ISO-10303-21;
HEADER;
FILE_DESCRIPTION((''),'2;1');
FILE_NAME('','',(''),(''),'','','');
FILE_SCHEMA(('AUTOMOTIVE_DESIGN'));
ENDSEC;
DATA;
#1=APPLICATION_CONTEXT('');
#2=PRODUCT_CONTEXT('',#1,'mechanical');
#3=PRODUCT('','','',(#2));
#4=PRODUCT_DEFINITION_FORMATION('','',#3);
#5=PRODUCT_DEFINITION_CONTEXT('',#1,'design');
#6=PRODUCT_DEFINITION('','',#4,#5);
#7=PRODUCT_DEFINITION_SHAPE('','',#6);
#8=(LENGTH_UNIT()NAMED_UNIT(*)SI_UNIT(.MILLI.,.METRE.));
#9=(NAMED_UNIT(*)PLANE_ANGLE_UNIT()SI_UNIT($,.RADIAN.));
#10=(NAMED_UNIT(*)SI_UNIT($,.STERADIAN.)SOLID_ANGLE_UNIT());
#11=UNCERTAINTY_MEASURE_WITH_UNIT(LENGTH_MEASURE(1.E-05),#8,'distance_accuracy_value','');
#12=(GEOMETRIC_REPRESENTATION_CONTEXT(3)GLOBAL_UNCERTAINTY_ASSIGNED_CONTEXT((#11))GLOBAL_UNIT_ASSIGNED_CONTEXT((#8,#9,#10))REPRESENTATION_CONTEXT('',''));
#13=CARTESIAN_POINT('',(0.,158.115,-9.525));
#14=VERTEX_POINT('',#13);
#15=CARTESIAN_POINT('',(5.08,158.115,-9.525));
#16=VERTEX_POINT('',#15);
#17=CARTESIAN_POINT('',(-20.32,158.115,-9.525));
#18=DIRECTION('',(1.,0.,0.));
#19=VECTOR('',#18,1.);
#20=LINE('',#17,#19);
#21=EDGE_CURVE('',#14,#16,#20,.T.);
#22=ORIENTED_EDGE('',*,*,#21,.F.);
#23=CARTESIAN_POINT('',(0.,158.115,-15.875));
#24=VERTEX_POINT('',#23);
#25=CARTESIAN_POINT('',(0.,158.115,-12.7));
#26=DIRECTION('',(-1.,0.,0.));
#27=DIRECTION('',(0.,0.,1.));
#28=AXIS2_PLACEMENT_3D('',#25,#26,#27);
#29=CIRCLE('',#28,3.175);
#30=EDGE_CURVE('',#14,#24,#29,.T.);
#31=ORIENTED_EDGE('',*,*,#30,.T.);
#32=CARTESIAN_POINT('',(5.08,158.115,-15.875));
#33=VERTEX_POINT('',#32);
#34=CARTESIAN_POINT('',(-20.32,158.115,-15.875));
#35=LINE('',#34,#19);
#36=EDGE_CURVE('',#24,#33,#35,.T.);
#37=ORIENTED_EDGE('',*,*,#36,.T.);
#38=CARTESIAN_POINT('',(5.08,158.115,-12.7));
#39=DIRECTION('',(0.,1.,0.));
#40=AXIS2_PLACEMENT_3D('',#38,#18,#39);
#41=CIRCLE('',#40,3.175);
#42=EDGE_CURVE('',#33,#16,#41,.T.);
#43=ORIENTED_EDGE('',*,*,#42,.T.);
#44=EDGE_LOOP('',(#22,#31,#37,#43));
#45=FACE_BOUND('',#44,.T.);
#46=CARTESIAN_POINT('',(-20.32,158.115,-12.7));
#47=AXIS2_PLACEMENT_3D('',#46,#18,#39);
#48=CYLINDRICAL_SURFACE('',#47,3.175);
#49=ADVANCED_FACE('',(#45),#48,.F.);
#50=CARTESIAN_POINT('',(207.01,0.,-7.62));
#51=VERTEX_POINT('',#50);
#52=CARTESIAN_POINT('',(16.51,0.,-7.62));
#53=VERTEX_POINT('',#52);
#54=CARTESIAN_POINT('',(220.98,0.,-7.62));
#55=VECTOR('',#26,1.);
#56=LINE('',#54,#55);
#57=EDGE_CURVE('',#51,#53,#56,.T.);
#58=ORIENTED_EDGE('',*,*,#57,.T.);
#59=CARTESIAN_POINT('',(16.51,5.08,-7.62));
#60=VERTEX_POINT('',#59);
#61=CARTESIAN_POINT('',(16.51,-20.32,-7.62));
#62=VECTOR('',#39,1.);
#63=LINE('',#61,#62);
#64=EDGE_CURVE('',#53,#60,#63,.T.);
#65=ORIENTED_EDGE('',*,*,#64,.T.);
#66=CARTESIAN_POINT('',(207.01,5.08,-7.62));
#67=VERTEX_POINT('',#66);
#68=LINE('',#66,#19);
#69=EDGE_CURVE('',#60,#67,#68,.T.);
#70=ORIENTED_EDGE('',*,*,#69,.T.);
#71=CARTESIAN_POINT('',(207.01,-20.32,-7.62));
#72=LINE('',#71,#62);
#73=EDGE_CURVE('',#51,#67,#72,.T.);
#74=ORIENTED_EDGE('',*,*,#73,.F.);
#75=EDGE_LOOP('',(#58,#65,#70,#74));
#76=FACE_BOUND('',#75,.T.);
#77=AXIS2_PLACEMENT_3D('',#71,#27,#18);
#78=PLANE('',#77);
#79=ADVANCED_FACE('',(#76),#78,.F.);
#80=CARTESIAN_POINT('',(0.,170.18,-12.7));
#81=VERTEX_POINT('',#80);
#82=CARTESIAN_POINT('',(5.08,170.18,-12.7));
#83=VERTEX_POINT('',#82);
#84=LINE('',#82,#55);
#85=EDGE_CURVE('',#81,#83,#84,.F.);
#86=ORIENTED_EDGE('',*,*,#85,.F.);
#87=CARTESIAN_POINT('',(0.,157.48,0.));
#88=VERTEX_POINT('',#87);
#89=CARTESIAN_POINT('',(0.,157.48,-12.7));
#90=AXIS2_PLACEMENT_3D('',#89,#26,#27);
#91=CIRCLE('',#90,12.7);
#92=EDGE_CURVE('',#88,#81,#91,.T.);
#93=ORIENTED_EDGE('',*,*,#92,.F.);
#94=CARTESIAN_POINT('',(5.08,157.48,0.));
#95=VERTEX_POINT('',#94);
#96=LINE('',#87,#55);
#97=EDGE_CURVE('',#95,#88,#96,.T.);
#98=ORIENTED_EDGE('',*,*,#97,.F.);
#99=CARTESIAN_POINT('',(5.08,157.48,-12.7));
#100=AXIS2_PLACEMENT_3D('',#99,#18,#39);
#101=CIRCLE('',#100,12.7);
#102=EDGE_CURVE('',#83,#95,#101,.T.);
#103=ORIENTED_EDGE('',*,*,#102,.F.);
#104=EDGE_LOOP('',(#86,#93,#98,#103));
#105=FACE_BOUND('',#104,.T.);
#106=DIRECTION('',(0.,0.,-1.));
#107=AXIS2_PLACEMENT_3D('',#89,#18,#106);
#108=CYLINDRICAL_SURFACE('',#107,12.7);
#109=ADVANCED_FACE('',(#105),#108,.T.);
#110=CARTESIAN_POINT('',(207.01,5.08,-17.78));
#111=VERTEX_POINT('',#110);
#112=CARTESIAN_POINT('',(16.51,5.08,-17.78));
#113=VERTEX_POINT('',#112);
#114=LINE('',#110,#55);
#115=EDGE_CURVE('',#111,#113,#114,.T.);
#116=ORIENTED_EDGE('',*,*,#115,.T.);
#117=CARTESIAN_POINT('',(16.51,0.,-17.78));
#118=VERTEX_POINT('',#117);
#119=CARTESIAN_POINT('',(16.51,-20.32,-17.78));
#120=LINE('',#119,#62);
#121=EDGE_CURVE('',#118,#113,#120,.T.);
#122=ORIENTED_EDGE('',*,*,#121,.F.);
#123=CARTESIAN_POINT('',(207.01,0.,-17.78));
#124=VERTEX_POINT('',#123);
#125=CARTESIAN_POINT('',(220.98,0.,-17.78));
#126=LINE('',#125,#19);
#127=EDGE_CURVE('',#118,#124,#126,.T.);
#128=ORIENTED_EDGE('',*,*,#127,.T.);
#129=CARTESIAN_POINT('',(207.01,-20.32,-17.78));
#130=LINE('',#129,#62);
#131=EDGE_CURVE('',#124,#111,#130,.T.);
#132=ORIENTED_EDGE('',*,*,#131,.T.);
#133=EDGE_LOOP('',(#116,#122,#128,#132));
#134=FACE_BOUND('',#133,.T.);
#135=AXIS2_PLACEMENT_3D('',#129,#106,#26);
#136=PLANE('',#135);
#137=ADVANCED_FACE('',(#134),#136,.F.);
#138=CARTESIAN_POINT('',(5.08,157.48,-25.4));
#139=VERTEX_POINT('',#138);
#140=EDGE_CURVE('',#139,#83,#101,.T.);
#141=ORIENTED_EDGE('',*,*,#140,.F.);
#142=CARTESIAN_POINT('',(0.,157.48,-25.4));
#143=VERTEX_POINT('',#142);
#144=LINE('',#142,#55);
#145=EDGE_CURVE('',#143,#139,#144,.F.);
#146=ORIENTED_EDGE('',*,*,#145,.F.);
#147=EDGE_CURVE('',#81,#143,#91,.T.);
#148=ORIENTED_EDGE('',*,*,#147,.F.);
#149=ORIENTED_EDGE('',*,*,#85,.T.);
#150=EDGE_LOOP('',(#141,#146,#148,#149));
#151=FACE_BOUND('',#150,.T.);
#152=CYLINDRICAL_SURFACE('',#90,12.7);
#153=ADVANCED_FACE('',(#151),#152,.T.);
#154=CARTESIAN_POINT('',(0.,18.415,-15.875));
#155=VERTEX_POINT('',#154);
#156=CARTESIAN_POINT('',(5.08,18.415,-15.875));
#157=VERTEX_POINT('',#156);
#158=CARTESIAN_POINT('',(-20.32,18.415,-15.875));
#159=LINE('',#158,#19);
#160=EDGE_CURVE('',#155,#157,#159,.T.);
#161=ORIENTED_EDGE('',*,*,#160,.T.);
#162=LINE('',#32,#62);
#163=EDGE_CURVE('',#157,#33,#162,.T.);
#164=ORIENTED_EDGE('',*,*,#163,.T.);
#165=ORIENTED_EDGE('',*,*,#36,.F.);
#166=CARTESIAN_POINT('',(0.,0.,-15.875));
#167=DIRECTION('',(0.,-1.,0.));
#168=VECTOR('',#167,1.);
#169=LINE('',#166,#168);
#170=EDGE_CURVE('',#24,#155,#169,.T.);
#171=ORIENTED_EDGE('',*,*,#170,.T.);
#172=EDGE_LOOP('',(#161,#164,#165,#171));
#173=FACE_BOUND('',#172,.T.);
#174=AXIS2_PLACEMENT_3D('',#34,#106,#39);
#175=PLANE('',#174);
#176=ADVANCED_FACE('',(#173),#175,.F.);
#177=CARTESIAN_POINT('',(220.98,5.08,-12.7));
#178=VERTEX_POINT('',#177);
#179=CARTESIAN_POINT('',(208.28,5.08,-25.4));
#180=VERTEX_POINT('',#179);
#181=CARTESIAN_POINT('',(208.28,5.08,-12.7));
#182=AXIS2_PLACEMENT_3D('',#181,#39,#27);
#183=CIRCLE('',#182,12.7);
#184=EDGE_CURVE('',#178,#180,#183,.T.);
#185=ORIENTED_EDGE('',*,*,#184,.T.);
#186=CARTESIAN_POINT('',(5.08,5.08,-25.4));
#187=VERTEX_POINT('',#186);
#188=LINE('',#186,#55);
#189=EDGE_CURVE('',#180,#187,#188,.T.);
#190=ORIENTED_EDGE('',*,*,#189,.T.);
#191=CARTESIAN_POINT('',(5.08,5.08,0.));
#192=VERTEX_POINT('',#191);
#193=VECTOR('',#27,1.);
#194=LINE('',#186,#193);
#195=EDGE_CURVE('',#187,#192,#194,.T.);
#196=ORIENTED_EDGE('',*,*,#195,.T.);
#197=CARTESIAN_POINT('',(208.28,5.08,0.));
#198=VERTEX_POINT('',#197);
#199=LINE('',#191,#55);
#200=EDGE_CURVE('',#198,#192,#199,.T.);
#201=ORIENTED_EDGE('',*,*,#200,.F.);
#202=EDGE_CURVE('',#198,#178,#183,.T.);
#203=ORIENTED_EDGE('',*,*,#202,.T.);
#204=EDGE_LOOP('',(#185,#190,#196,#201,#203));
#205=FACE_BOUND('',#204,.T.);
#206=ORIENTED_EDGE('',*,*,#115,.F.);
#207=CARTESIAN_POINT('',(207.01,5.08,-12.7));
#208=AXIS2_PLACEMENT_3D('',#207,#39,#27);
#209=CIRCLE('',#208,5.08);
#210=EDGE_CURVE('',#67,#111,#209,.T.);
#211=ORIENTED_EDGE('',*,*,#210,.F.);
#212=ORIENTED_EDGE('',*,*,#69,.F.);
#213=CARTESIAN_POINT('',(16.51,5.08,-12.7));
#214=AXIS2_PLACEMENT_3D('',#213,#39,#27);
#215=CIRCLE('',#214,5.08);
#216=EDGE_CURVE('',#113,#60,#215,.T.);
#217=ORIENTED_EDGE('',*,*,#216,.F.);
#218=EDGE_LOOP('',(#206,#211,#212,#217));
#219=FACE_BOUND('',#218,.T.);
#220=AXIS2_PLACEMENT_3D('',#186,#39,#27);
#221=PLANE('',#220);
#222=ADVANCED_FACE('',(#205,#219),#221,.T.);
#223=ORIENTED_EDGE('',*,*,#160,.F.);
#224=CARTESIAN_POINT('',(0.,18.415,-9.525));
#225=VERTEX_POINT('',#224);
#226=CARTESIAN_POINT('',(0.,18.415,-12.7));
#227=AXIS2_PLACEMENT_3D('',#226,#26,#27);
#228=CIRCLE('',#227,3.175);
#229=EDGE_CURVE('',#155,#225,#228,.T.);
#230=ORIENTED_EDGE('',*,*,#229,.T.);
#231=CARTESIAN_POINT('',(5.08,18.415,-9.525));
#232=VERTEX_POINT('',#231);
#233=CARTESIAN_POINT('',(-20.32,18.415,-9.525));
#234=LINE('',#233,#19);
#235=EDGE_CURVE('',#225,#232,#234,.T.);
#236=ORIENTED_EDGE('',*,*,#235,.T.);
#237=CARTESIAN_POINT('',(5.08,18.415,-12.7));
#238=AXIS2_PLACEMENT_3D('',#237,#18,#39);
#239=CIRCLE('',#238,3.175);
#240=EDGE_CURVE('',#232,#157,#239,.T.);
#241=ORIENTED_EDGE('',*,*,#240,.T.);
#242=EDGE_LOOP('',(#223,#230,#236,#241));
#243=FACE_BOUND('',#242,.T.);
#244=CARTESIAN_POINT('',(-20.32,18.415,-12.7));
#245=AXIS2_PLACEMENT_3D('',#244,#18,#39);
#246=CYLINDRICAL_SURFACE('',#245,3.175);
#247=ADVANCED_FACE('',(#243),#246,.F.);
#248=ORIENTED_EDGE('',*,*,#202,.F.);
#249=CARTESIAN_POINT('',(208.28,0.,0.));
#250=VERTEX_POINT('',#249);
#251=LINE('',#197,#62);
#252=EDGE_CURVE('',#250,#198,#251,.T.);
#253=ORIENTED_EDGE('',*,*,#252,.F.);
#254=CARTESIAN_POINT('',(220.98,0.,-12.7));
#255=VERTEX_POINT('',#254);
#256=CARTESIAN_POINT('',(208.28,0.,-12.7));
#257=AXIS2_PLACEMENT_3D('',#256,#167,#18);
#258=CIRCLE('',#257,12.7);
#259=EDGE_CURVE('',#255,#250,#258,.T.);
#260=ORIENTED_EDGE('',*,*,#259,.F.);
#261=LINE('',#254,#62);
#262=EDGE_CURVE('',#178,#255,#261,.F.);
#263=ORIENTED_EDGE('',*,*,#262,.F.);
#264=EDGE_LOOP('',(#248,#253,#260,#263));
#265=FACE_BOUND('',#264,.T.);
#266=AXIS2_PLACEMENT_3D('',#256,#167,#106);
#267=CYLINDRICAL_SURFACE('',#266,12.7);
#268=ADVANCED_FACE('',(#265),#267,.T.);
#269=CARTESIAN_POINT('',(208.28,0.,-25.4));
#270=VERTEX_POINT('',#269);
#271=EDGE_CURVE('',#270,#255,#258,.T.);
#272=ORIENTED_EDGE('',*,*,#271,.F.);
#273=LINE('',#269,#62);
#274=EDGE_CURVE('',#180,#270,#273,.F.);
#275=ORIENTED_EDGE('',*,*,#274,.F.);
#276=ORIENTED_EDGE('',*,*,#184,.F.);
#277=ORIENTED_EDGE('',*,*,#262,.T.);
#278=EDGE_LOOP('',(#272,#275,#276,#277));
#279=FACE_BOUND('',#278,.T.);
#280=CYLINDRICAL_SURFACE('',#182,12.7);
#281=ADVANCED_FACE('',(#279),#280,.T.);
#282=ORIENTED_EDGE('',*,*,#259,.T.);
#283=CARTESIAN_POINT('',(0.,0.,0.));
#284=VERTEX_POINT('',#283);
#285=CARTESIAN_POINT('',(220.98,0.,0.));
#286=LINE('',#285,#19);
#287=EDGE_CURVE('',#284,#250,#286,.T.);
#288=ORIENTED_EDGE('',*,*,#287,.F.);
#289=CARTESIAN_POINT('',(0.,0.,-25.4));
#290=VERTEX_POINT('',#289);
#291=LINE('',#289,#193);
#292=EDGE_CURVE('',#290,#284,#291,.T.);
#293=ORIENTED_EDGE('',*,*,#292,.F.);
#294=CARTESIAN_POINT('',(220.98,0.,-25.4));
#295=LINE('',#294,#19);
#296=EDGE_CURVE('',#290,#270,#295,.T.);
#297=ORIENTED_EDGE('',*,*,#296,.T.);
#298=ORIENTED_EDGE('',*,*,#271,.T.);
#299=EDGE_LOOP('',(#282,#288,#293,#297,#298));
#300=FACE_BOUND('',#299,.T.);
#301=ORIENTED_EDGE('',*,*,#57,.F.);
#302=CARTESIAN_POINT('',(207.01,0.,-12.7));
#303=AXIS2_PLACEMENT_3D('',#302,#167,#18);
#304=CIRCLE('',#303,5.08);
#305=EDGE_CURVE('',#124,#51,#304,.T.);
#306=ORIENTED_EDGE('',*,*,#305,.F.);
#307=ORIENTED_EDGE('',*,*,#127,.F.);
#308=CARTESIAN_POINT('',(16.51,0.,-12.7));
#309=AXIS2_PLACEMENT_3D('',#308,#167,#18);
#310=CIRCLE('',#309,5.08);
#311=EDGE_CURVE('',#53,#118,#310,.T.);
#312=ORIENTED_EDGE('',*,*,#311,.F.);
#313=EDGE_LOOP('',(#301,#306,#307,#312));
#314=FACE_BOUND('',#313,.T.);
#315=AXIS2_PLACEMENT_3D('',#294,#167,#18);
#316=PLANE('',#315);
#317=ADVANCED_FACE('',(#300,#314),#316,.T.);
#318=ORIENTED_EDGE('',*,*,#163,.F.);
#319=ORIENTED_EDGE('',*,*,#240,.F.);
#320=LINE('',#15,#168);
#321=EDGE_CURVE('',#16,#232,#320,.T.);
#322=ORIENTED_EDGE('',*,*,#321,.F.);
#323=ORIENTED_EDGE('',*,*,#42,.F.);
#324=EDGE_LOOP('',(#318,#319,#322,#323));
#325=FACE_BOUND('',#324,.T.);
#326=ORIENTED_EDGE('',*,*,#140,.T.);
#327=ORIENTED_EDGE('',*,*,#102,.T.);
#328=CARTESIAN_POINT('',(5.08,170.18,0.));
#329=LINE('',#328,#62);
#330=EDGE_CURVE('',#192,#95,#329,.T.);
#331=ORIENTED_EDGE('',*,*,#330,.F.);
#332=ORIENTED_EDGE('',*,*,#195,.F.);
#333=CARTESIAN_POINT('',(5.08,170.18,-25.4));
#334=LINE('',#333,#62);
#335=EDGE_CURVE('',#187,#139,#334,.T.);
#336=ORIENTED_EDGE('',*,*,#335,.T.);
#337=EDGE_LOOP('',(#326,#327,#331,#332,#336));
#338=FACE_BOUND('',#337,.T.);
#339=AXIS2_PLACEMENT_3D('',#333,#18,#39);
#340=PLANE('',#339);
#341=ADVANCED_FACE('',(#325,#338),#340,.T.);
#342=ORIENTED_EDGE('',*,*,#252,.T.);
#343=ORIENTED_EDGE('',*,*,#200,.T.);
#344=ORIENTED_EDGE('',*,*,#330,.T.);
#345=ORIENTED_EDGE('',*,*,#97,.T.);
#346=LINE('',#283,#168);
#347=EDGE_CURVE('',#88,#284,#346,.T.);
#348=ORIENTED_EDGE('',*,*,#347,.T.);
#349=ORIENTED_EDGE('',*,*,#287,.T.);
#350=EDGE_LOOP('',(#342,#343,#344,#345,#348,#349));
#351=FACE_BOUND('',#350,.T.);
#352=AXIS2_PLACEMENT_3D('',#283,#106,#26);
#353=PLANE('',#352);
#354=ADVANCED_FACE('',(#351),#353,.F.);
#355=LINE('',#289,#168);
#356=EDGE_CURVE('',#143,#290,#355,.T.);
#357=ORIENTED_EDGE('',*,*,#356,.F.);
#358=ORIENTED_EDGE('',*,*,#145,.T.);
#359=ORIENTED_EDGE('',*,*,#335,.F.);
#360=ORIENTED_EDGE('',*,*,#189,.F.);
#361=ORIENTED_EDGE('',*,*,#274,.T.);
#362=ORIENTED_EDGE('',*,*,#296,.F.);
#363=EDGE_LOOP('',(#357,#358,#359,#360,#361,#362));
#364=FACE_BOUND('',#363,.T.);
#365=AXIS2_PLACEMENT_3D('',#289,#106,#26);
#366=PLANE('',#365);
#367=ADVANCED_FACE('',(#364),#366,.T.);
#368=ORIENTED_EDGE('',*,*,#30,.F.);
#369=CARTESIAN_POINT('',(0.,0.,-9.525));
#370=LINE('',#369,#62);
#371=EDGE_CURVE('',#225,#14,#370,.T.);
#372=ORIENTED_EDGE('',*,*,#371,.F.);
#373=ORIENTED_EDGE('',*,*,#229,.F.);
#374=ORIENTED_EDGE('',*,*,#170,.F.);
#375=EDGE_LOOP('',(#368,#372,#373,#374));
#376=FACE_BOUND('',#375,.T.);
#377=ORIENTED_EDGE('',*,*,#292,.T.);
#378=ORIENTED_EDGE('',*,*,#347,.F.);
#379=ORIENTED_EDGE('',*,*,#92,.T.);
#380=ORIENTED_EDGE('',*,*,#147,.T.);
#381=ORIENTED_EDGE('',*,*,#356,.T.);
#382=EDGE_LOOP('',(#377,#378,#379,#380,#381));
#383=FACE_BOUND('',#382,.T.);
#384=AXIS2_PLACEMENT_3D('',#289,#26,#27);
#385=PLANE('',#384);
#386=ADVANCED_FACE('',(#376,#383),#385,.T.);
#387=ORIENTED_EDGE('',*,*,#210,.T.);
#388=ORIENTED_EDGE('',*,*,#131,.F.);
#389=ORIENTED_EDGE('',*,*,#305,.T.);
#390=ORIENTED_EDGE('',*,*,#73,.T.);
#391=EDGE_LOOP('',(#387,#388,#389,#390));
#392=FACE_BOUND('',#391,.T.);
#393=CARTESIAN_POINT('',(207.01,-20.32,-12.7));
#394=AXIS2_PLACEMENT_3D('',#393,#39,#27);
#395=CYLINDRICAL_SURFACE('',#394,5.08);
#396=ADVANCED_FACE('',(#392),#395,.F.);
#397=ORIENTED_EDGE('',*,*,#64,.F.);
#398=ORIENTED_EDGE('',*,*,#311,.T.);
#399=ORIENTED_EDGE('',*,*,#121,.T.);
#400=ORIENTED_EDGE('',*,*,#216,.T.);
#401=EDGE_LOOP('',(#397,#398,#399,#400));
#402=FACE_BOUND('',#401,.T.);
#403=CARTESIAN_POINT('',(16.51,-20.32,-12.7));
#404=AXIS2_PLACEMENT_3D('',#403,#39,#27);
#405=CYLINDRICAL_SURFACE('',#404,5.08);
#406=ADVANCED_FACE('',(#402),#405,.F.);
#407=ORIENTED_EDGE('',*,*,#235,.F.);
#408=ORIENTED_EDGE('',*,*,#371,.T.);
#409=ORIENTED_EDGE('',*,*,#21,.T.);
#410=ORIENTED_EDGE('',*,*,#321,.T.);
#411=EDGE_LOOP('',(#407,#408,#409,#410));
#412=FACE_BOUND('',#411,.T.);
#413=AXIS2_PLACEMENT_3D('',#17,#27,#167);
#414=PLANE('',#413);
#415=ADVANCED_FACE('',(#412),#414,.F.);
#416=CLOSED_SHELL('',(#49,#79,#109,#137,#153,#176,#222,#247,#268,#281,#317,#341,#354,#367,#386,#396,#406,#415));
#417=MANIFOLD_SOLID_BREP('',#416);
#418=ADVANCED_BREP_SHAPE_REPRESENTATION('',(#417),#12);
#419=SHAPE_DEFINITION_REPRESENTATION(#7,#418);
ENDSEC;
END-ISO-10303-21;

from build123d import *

# Parameters (mm, degrees)
BOSS_EXTRUDE1_DEPTH = 25.4
FILLET1_R           = 12.7
CUT_EXTRUDE1_DEPTH  = 25.4
CUT_EXTRUDE3_DEPTH  = 25.4


with BuildPart() as part:
    # Sketch1 → Boss-Extrude1 (new body)
    with BuildSketch(Plane.XY):
        Polygon((0, 170.18), (5.08, 170.18), (5.08, 5.08), (220.98, 5.08), (220.98, 0), (0, 0), align=None)
    extrude(amount=-BOSS_EXTRUDE1_DEPTH)

    # Fillet1
    fillet1_edges = [part.edges().sort_by_distance(p)[0] for p in [
        (220.98, 2.54, -25.4),
        (220.98, 2.54, 0),
        (2.54, 170.18, -25.4),
        (2.54, 170.18, 0),
    ]]
    fillet(fillet1_edges, radius=FILLET1_R - 0.0001)  # a hair under: the kernel refuses the full size

    # Sketch4 → Cut-Extrude1 (cut)
    with BuildSketch(Plane(origin=(5.08, 0, 0), x_dir=(0, 0, -1), z_dir=(1, 0, 0))):
        with BuildLine():
            Line((9.525, 158.115), (9.525, 18.415))
            ThreePointArc((9.525, 18.415), (12.7, 15.24), (15.875, 18.415))
            Line((15.875, 18.415), (15.875, 158.115))
            ThreePointArc((15.875, 158.115), (12.7, 161.29), (9.525, 158.115))
        make_face()
    extrude(amount=-CUT_EXTRUDE1_DEPTH, mode=Mode.SUBTRACT)

    # Sketch5 → Cut-Extrude3 (cut)
    with BuildSketch(Plane(origin=(0, 5.08, 0), x_dir=(1, 0, 0), z_dir=(0, 1, 0))):
        with BuildLine():
            Line((207.01, 17.78), (16.51, 17.78))
            ThreePointArc((16.51, 17.78), (11.43, 12.7), (16.51, 7.62))
            Line((16.51, 7.62), (207.01, 7.62))
            ThreePointArc((207.01, 7.62), (212.09, 12.7), (207.01, 17.78))
        make_face()
    extrude(amount=-CUT_EXTRUDE3_DEPTH, mode=Mode.SUBTRACT)


solid = part.part
